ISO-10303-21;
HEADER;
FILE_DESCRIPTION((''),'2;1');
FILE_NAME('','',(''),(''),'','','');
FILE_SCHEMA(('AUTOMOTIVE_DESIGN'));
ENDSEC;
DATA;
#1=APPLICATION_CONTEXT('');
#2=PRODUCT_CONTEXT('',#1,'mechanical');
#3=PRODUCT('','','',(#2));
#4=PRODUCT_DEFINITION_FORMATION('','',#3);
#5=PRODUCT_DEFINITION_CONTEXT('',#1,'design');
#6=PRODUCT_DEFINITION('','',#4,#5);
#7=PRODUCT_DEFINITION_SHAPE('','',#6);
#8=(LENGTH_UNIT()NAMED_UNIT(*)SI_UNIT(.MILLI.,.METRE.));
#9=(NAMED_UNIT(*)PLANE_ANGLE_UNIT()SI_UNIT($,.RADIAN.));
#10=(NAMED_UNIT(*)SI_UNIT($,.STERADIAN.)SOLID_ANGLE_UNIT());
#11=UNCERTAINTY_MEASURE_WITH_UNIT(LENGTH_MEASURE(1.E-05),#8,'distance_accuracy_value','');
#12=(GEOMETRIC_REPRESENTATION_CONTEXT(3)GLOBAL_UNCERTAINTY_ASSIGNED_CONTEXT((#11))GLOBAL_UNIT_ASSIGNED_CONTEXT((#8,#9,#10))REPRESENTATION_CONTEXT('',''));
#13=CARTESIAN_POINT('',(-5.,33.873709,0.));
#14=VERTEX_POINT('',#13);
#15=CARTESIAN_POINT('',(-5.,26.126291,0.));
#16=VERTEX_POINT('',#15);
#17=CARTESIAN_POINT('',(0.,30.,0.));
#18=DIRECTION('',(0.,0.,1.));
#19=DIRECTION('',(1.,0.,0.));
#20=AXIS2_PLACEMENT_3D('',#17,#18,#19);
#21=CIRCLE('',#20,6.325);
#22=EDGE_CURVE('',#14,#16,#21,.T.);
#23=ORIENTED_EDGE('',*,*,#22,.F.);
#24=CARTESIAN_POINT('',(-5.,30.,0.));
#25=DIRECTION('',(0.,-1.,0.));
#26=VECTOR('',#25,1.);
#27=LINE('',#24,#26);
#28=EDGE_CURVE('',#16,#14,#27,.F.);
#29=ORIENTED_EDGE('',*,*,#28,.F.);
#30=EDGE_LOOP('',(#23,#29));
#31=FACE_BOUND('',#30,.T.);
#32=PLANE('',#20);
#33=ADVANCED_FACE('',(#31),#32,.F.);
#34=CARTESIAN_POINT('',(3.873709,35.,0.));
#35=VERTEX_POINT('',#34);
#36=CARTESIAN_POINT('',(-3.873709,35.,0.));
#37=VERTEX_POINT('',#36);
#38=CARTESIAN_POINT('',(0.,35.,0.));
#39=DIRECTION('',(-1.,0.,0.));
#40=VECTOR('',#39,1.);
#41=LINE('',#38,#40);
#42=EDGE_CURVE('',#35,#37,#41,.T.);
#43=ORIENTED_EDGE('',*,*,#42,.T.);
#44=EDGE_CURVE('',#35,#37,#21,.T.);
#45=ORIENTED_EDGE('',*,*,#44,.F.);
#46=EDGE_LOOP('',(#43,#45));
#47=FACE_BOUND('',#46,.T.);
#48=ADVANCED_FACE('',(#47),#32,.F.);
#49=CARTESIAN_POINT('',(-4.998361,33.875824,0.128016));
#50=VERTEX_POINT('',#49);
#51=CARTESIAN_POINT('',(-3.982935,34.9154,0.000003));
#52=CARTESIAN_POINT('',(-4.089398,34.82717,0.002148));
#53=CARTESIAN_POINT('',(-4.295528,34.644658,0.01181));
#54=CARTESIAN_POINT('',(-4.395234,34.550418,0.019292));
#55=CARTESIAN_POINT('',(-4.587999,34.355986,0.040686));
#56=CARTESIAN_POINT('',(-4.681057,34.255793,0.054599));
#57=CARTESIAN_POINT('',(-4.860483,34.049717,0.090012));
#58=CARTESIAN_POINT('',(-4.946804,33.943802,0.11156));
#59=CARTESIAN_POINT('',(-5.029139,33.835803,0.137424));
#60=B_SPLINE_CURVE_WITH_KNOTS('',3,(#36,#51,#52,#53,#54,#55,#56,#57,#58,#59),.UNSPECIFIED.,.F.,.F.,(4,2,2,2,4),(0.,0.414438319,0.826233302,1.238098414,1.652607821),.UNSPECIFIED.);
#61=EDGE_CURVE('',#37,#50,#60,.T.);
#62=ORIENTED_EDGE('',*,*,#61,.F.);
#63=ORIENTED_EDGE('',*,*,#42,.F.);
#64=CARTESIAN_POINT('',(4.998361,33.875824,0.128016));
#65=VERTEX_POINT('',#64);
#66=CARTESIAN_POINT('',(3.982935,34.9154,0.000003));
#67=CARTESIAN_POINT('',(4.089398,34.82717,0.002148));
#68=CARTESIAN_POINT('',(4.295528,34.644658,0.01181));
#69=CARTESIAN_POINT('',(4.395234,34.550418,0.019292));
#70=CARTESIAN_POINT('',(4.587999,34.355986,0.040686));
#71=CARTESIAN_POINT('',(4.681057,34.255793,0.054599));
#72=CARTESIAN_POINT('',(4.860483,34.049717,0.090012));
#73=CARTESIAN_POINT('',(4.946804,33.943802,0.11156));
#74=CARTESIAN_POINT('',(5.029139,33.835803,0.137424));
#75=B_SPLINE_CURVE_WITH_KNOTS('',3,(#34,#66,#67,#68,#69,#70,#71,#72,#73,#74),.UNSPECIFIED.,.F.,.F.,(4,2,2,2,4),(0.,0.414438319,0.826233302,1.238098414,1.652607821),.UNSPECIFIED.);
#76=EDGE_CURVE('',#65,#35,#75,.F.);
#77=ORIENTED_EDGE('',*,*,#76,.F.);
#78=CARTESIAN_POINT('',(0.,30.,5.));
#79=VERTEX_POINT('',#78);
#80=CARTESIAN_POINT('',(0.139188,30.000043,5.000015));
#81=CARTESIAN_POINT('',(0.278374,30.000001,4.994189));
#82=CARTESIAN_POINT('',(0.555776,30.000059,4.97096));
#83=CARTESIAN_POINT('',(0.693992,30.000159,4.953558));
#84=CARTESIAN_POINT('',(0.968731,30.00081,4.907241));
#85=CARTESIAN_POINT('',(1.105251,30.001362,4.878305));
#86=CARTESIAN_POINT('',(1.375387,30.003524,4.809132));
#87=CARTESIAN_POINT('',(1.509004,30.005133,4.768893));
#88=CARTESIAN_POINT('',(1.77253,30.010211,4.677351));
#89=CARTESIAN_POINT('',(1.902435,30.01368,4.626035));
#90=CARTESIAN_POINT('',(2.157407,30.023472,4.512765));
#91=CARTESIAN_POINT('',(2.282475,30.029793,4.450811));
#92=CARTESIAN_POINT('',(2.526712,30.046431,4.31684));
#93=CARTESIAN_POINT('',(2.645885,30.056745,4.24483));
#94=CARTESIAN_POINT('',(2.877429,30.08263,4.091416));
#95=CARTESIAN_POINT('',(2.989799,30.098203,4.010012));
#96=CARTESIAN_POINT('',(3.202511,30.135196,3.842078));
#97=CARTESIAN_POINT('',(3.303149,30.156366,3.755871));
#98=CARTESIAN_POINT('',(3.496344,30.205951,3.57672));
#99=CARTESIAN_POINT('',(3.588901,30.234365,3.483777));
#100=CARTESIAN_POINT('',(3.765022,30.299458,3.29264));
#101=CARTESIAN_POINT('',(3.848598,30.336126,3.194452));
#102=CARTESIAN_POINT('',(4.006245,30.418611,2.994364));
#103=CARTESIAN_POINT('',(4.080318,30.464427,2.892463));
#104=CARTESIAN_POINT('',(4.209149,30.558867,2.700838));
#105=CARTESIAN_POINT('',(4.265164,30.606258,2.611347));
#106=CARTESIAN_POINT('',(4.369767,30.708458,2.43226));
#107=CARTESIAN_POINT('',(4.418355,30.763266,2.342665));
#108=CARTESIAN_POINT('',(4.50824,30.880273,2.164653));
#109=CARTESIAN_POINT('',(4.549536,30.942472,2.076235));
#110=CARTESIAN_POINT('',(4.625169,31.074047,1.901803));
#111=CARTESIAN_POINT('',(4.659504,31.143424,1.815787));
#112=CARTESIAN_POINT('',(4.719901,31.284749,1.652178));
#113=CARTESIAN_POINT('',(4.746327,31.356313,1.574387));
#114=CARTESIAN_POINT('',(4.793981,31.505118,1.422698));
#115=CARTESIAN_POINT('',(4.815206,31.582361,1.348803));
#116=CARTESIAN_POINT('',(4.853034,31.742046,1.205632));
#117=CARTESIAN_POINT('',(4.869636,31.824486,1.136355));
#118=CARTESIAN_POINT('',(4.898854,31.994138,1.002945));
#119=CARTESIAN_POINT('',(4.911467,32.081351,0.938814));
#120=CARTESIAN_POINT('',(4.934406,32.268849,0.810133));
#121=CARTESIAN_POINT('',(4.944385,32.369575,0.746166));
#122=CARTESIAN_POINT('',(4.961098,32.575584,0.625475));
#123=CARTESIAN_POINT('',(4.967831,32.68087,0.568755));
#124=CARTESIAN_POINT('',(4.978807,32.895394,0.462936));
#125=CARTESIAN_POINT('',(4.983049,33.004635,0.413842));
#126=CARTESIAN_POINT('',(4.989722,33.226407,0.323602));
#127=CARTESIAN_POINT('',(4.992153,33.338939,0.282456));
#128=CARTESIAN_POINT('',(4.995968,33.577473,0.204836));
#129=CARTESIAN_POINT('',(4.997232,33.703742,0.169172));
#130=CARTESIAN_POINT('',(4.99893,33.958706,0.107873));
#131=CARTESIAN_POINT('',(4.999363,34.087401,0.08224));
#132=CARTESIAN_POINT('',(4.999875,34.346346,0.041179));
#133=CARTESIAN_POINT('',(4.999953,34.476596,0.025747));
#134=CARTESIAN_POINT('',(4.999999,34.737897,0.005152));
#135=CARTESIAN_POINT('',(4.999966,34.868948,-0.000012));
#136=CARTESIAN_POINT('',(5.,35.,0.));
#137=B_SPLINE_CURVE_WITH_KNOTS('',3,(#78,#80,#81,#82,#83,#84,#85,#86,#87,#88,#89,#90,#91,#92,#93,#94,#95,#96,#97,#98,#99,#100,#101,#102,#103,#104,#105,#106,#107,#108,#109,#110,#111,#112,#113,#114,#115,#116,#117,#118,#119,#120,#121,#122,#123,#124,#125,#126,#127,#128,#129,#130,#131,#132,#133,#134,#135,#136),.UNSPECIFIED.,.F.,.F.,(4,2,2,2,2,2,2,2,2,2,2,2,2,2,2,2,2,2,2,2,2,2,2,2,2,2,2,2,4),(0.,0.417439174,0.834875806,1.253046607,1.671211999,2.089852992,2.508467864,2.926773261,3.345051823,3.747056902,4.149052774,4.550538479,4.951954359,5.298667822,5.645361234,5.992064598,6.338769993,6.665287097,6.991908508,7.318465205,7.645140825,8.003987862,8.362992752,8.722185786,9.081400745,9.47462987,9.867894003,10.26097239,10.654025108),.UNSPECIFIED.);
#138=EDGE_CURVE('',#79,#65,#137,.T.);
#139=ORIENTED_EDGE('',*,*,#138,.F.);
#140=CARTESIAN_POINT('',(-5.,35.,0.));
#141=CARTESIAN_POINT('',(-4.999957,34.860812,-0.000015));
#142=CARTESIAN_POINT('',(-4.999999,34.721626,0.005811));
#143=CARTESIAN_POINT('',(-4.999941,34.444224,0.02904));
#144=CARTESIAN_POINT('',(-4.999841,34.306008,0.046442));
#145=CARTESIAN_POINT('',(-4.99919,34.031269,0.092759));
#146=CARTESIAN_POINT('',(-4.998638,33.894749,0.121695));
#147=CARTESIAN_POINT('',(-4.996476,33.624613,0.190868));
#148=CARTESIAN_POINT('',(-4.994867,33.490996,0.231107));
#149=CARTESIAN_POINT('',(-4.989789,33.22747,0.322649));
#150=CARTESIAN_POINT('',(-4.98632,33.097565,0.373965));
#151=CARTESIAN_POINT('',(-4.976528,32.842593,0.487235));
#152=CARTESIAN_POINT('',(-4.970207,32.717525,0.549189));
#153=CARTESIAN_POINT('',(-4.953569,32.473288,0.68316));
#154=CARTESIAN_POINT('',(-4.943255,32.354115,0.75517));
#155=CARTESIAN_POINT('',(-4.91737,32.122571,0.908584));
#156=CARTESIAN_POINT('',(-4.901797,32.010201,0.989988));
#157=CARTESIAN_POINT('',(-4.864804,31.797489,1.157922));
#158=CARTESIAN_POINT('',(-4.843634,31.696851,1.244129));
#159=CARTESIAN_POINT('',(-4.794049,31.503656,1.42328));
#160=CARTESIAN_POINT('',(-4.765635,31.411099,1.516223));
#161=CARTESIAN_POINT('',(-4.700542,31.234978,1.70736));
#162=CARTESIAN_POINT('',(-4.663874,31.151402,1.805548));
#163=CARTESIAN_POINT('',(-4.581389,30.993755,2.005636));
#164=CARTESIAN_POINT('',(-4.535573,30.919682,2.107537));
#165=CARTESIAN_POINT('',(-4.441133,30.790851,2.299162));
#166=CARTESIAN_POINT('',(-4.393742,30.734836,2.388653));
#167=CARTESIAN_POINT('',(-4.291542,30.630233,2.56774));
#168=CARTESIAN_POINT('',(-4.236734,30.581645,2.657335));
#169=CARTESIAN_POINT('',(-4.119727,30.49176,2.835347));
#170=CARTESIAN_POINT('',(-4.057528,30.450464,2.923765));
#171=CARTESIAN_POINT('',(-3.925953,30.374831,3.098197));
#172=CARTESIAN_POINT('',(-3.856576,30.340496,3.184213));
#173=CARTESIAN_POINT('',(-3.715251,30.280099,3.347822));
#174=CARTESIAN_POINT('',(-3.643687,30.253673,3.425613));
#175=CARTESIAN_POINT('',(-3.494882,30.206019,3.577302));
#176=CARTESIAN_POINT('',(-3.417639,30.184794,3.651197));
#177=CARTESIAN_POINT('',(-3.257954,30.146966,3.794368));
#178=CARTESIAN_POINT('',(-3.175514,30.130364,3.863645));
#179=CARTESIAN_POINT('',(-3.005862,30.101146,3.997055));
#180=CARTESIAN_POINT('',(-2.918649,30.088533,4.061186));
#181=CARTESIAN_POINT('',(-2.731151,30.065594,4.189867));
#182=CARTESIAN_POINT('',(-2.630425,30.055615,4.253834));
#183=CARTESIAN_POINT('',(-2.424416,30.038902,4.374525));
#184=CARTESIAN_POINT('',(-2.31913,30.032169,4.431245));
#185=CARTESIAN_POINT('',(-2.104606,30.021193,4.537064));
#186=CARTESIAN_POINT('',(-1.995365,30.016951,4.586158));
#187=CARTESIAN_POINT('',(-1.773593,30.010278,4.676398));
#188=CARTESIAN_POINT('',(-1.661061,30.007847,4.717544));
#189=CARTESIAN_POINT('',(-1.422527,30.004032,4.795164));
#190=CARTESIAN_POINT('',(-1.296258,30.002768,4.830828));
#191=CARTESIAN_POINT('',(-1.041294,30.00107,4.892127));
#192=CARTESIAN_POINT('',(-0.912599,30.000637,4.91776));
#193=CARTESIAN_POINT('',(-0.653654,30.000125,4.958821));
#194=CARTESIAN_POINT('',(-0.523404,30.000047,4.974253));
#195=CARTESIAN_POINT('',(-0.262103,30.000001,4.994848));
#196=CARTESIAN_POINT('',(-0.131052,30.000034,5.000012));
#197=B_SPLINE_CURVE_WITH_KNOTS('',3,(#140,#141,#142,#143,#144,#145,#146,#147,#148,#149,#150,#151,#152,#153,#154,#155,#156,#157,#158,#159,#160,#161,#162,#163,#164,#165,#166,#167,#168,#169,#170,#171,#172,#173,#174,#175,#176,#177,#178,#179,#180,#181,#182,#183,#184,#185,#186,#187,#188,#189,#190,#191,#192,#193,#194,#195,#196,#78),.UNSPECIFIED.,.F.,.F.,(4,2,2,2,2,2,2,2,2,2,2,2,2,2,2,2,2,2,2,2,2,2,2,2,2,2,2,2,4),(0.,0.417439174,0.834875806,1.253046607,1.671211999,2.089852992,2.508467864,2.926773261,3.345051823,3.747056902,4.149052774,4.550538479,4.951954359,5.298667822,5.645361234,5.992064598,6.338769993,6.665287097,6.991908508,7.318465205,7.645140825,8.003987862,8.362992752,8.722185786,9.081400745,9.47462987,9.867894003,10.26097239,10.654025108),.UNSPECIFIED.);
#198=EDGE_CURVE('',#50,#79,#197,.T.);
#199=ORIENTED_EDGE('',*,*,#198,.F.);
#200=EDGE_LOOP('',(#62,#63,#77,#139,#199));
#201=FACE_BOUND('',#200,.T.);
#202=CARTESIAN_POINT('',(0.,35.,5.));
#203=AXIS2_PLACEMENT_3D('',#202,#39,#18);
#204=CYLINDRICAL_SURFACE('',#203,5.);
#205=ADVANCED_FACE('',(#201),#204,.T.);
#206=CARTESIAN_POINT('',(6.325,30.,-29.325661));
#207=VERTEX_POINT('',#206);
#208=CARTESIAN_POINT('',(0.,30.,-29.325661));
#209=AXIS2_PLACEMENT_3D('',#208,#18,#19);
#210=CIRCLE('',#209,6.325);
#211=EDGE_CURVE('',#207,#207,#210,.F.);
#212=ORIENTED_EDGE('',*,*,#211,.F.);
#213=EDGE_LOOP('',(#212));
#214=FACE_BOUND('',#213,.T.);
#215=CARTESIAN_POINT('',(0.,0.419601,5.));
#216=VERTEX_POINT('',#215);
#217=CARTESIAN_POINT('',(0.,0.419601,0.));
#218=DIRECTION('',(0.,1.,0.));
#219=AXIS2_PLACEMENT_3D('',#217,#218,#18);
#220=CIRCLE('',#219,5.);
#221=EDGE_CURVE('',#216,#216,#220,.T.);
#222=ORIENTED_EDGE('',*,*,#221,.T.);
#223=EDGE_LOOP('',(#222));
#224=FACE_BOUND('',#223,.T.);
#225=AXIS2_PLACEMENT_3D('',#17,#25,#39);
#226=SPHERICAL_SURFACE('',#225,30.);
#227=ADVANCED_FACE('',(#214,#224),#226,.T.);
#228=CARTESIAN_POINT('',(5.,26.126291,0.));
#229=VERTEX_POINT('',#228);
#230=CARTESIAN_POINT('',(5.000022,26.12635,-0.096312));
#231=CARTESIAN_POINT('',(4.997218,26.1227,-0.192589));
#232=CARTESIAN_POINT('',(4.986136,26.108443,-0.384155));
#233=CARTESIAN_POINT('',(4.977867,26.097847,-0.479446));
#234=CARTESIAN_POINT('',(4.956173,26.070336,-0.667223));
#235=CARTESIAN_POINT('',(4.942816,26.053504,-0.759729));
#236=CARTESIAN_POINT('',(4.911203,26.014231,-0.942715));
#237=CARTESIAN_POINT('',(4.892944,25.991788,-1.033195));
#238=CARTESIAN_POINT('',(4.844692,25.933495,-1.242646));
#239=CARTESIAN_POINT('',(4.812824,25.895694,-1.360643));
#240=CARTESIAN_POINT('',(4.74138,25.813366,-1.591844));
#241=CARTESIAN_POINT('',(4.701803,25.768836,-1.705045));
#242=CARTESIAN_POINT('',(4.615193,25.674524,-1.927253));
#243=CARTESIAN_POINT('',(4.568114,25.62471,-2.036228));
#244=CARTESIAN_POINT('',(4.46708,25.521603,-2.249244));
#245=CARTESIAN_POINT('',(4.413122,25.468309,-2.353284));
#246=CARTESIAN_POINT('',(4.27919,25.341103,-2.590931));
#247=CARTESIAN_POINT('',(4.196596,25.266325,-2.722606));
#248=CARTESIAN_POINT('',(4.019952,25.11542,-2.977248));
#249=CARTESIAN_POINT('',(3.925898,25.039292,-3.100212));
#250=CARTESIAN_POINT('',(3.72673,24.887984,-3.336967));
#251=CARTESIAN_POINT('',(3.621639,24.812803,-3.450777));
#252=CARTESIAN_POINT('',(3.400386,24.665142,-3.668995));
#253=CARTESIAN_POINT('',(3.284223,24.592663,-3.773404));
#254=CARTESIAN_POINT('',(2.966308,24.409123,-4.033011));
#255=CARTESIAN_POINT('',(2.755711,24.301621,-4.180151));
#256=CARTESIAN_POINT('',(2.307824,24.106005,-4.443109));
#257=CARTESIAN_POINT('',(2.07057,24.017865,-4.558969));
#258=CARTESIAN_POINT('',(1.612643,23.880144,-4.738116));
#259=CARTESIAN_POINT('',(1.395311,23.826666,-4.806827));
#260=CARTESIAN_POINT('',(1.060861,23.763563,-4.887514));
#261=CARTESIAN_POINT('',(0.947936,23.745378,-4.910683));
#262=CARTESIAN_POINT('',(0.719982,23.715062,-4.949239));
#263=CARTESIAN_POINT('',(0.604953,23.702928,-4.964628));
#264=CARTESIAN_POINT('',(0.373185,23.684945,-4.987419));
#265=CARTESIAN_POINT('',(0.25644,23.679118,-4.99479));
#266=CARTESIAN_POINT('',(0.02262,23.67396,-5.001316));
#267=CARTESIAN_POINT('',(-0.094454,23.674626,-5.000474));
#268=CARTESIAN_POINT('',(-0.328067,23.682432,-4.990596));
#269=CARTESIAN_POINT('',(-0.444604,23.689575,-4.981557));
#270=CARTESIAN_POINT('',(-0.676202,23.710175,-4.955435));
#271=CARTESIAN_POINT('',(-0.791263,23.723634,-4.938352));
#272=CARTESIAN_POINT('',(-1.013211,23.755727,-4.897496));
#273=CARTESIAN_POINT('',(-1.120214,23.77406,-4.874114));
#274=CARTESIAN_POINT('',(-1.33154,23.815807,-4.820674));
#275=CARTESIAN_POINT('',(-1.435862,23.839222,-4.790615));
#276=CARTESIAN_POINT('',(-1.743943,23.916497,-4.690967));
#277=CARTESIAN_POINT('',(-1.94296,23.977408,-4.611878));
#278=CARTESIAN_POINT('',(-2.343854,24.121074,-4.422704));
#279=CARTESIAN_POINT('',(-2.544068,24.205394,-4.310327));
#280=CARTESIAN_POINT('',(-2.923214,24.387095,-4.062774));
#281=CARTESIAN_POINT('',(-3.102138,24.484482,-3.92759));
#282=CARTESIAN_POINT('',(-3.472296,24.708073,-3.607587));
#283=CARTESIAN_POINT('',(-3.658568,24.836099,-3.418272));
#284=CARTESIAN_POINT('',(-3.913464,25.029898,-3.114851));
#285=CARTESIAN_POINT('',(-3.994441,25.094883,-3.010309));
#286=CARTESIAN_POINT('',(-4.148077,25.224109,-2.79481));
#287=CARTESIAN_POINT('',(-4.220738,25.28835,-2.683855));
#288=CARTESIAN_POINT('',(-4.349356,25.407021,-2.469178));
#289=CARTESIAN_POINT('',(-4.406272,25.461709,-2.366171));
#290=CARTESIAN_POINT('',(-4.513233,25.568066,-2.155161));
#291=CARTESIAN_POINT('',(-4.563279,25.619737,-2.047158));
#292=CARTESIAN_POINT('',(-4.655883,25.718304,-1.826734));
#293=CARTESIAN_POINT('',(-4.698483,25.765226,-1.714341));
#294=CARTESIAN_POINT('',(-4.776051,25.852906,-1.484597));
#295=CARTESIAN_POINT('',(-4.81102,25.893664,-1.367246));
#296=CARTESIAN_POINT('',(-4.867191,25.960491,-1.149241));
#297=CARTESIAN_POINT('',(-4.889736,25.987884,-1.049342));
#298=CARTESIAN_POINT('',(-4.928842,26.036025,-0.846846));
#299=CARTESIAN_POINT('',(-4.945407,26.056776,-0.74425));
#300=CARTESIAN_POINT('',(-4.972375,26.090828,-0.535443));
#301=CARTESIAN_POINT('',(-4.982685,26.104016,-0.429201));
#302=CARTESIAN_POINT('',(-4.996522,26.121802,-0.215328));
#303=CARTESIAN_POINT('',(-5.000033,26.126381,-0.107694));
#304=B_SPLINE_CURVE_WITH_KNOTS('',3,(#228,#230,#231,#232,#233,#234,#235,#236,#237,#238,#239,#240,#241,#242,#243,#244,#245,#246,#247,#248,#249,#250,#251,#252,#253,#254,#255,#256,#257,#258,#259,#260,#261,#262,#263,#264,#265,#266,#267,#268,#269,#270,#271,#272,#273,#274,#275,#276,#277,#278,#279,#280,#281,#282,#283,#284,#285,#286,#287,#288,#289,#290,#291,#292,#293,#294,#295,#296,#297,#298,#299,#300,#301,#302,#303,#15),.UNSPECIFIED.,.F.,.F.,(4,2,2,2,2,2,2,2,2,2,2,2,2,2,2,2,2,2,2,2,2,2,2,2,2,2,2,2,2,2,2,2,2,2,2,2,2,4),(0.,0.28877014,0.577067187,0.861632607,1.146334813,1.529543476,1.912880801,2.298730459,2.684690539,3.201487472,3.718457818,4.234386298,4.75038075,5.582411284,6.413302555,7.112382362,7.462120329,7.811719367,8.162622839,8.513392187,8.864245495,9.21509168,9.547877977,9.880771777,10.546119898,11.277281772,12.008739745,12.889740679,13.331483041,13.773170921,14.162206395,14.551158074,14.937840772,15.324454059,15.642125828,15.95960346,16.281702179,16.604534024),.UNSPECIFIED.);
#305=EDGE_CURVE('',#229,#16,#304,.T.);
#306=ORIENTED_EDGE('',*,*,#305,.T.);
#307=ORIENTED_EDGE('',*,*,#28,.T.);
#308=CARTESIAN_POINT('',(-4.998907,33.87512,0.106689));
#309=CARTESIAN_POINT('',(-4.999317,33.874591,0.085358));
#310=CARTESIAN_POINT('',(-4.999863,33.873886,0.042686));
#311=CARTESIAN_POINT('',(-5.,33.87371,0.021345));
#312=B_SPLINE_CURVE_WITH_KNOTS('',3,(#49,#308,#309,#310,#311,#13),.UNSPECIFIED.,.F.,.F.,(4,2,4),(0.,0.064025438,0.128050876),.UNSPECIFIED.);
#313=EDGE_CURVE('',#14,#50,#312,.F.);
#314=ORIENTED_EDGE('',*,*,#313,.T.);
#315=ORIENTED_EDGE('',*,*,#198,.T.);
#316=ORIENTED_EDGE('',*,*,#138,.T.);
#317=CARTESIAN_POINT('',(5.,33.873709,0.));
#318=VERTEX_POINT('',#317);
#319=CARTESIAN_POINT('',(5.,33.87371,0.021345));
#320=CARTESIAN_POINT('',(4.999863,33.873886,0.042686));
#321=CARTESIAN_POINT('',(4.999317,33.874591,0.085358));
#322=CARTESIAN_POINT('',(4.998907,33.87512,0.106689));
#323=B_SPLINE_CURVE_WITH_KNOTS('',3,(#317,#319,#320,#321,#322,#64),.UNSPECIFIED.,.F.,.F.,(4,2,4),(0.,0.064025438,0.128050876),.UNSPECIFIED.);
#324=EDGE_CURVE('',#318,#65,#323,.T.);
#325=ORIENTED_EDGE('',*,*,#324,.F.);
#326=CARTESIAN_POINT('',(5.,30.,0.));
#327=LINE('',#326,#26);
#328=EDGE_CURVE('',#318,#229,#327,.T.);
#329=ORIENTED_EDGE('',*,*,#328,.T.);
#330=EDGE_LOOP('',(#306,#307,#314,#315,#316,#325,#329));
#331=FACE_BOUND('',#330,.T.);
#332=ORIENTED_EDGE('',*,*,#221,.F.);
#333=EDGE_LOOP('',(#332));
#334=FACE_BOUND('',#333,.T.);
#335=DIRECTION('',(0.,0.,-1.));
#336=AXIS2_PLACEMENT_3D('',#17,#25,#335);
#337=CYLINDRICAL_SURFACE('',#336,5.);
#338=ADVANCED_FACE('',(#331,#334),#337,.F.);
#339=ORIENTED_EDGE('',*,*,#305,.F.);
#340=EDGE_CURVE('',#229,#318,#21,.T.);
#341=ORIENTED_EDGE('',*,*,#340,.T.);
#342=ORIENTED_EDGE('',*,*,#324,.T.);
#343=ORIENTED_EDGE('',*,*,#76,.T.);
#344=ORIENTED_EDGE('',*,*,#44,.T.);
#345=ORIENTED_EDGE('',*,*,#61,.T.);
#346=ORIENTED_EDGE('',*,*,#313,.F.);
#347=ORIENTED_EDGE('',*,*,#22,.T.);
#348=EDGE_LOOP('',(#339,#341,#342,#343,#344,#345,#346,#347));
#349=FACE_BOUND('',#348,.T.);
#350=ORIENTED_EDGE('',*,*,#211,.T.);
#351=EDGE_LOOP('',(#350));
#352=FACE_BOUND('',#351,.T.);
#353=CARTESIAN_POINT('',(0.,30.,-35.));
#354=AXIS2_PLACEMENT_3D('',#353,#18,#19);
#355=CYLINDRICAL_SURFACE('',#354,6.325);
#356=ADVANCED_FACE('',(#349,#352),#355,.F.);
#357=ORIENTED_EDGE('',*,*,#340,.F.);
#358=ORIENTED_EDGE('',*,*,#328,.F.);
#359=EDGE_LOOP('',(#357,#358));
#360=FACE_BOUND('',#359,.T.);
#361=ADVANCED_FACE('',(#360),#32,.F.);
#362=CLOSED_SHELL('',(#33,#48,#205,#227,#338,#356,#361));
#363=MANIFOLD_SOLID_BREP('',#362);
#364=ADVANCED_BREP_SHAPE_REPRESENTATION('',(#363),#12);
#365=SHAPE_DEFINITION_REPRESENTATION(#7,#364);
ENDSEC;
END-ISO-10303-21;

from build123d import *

# Parameters (mm, degrees)
SKETCH2_R          = 6.325
CUT_EXTRUDE1_DEPTH = 35
SKETCH3_R          = 5
CUT_EXTRUDE2_DEPTH = 30
FILLET1_R          = 5


with BuildPart() as part:
    # Sketch1 → Revolve1 (revolve)
    with BuildSketch(Plane.XY):
        with BuildLine():
            Line((0, 0), (0, 60))
            ThreePointArc((0, 60), (30, 30), (0, 0))
        make_face()
    revolve(axis=Axis((0, 0, 0), (0, 1, 0)))

    # Sketch2 → Cut-Extrude1 (cut)
    with BuildSketch(Plane.XY):
        with Locations((0, 30)):
            Circle(SKETCH2_R)
    extrude(amount=-CUT_EXTRUDE1_DEPTH, mode=Mode.SUBTRACT)

    # Sketch3 → Cut-Extrude2 (cut)
    with BuildSketch(Plane(origin=(0, 0, 0), x_dir=(1, 0, 0), z_dir=(0, 1, 0))):
        with Locations(Location((0, 0, 0), (0, 0, 180))):
            Circle(SKETCH3_R)
    extrude(amount=CUT_EXTRUDE2_DEPTH, mode=Mode.SUBTRACT)

    # Fillet1
    # the kernel refuses this fillet: 5 mm, written as the material it takes off along each edge
    with BuildSketch(Plane(origin=(17.5, 30, 0), x_dir=(0, 1, 0), z_dir=(-1, 0, 0))) as fillet1_piece_1_section:
        with BuildLine():
            CenterArc((FILLET1_R, -FILLET1_R), FILLET1_R, 90, 90)
            Line((0, -FILLET1_R), (0, 0))
            Line((0, 0), (FILLET1_R, 0))
        make_face()
    fillet1_piece_1 = extrude(amount=35, mode=Mode.PRIVATE)
    fillet1_piece_1 = fillet1_piece_1 & Plane(origin=(0, 31.17476679, 0), x_dir=(-1, 0, 0), z_dir=(0, -1, 0)) * Cylinder(5, 90, mode=Mode.PRIVATE)
    fillet1_piece_1 = fillet1_piece_1 & Plane(origin=(0, 30, 1.028849853), x_dir=(1, 0, 0), z_dir=(0, 0, 1)) * Cylinder(6.325, 90, mode=Mode.PRIVATE)
    add(fillet1_piece_1, mode=Mode.SUBTRACT)


solid = part.part
